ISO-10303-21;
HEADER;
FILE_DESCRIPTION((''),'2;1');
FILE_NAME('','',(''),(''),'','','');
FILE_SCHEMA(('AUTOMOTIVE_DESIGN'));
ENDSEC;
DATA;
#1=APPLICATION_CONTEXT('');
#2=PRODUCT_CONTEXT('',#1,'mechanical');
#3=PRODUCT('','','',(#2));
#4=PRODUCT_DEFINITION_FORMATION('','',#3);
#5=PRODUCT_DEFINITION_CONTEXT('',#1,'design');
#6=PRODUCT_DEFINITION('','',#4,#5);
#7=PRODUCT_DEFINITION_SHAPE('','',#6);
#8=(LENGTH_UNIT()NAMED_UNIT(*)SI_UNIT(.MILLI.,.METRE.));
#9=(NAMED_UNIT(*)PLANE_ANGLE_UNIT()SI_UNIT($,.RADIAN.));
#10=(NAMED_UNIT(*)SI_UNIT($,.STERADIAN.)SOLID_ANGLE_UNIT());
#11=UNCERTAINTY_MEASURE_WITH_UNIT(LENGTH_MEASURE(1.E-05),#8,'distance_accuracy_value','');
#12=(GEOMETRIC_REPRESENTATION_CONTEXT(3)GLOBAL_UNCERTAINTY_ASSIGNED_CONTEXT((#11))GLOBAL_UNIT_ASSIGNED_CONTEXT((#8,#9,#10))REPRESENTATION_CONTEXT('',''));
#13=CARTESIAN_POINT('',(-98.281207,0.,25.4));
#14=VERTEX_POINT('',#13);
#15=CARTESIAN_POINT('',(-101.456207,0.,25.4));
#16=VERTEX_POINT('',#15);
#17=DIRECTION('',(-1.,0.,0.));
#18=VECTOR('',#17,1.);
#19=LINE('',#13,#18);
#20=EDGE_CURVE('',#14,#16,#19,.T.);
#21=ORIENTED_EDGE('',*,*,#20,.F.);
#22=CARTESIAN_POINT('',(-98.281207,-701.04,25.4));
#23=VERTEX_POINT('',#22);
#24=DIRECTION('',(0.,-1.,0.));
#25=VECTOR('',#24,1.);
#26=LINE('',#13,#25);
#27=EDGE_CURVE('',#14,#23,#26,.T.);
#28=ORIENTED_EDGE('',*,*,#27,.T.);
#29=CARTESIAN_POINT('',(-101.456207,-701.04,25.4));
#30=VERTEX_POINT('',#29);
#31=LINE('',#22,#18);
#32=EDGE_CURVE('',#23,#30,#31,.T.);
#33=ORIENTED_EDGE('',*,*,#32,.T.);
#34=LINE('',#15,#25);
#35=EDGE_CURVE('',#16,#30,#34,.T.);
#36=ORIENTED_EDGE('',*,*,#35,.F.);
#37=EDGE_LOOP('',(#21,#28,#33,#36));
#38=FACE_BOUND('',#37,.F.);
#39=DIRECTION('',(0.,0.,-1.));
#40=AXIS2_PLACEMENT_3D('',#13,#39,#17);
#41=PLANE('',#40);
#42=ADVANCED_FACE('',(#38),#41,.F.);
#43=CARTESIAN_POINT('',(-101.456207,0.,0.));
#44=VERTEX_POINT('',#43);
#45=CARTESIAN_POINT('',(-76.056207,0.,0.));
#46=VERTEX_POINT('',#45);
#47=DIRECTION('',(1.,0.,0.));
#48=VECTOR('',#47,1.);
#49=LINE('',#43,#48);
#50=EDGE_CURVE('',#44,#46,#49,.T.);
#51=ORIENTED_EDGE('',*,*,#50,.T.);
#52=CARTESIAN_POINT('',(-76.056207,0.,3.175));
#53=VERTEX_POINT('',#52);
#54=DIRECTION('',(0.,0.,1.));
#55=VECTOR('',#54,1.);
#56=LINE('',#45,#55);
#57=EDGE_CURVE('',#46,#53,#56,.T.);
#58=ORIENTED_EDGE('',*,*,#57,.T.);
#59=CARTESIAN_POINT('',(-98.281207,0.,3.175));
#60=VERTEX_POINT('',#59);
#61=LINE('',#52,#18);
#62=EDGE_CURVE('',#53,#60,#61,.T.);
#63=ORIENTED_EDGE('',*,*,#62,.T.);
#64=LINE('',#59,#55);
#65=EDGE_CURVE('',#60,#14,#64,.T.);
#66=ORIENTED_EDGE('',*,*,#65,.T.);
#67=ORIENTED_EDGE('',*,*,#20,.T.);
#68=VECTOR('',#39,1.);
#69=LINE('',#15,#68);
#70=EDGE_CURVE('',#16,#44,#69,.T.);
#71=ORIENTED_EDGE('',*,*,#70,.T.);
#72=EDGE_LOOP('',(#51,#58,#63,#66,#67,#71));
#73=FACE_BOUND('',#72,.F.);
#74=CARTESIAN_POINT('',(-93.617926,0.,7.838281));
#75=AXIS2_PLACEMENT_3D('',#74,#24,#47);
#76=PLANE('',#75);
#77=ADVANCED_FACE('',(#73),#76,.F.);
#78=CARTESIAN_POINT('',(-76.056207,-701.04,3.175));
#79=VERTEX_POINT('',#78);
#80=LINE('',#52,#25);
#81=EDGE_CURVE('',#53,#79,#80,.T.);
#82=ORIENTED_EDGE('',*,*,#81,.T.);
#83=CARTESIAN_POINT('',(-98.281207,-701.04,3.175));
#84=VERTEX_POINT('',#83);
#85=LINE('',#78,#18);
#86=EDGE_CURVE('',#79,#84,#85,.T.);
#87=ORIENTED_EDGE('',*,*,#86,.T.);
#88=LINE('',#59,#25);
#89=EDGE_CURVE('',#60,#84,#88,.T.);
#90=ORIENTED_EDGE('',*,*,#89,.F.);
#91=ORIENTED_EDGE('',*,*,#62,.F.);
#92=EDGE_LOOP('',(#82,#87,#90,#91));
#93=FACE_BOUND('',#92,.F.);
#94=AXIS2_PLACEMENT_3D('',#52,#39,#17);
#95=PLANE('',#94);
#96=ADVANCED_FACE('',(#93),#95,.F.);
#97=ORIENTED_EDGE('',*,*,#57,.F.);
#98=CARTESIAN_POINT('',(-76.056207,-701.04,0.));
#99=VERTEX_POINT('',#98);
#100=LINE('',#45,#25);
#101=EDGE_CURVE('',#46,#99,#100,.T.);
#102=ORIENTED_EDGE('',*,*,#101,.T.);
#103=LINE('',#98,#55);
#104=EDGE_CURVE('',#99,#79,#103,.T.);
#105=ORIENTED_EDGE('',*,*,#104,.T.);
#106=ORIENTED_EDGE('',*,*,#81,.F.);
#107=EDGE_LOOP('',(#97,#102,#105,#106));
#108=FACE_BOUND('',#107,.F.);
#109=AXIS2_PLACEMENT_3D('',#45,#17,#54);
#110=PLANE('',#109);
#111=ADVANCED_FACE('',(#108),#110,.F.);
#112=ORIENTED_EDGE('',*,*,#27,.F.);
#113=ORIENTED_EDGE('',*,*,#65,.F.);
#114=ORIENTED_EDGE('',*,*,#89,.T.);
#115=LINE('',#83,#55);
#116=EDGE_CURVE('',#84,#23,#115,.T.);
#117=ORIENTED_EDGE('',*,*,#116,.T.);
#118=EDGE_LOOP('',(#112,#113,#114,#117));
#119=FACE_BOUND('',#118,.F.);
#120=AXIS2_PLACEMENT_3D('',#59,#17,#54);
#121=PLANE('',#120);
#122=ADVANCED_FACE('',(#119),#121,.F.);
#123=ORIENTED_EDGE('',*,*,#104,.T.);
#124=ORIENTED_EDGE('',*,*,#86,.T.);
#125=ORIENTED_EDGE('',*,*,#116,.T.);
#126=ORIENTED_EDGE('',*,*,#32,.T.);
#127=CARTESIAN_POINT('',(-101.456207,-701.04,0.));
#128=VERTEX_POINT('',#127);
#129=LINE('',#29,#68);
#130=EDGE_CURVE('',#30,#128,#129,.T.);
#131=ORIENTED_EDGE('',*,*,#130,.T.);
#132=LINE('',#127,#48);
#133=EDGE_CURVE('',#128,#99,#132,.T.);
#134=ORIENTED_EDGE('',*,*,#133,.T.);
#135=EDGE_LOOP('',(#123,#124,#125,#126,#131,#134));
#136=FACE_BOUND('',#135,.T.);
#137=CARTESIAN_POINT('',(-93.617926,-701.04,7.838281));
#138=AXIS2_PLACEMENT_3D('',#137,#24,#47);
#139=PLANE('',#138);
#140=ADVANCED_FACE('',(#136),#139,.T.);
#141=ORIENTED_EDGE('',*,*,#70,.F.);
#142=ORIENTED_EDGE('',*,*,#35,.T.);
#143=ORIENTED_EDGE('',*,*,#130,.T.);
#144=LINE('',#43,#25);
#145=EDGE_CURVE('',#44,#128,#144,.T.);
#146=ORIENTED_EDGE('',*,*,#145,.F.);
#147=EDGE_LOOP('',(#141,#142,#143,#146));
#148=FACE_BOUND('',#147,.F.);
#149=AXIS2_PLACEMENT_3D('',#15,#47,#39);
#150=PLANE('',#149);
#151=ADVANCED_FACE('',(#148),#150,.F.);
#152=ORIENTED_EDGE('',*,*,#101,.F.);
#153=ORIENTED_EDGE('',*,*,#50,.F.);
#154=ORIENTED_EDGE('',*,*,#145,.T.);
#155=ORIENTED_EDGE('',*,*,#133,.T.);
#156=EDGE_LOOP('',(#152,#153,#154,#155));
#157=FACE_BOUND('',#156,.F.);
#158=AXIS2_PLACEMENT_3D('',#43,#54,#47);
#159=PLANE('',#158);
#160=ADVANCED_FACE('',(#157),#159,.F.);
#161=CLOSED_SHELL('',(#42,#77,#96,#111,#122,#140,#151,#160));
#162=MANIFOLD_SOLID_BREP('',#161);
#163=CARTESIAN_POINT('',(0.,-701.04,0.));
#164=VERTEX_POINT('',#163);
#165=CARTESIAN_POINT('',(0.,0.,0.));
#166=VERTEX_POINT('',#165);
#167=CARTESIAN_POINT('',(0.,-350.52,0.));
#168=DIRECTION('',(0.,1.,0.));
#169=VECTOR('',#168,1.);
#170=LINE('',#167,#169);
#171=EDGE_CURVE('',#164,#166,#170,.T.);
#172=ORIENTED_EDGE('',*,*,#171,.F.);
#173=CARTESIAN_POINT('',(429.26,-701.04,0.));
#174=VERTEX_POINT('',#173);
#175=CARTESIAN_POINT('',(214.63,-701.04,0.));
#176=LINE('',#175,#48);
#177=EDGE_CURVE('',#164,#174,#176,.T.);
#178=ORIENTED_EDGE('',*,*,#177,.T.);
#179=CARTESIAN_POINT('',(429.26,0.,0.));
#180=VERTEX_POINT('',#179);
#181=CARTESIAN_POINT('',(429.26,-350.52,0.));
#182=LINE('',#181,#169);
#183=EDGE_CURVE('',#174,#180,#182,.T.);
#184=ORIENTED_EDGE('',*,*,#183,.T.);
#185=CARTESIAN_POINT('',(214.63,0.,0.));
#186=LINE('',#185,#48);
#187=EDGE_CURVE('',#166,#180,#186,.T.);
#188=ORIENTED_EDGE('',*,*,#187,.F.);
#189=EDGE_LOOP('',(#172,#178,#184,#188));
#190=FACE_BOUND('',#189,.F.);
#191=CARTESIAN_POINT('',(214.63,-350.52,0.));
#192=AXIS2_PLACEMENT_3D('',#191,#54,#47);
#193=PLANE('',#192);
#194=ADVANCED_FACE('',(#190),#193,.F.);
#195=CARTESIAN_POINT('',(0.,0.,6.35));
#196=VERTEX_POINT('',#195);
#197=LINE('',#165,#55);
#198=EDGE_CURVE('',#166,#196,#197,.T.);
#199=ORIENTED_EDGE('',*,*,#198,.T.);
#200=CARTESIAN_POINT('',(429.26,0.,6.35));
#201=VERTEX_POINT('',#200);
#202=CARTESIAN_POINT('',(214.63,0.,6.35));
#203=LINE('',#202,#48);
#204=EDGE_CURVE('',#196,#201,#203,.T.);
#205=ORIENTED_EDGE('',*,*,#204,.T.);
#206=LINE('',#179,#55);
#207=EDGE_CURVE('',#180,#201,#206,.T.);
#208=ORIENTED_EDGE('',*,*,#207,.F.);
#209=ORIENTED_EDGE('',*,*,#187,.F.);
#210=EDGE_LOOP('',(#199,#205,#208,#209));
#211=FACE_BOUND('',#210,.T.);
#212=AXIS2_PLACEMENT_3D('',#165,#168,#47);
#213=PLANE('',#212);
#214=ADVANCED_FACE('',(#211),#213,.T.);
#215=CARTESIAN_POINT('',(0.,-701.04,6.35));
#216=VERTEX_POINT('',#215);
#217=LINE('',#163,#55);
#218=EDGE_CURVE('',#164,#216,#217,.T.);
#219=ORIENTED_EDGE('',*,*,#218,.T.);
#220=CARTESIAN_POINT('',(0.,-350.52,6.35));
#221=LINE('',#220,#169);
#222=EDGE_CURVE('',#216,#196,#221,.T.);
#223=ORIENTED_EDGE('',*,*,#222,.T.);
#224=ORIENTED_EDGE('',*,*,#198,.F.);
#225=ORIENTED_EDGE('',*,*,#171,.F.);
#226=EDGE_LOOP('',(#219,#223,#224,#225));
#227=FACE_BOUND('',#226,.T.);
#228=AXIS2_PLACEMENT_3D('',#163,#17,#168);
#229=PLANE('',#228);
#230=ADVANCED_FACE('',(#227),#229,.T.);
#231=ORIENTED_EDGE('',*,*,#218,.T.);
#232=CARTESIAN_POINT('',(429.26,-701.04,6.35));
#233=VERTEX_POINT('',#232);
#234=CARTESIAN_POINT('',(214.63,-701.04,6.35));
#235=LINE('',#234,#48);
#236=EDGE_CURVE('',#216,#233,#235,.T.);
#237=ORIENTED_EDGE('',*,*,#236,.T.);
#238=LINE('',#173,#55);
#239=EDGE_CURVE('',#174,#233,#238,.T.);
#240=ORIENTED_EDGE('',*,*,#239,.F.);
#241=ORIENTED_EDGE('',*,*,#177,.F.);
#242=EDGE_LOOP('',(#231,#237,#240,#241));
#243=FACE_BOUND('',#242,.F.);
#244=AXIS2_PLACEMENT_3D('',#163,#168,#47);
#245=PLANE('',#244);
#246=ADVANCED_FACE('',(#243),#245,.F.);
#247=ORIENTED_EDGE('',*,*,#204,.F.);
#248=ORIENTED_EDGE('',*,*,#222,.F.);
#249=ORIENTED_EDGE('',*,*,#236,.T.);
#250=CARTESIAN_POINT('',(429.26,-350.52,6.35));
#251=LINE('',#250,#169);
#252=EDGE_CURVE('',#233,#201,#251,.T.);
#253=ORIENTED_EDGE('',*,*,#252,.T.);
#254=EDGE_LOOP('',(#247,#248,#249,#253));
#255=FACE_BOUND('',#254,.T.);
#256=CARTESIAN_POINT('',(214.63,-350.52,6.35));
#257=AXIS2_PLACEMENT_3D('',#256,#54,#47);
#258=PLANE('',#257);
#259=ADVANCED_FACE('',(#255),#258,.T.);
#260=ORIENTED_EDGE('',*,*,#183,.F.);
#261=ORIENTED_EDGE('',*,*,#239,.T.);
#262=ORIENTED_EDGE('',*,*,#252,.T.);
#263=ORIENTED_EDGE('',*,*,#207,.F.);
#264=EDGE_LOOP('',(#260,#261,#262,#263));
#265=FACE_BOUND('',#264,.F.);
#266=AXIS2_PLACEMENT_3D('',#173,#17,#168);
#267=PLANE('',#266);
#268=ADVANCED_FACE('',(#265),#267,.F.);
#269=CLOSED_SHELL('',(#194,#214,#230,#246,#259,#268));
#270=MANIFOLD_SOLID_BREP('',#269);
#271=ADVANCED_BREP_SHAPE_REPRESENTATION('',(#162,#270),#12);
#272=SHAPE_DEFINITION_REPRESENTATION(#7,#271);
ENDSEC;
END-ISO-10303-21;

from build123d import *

# Parameters (mm, degrees)
F0_W     = 429.26
F0_H     = 701.04
F1_DEPTH = 6.35
F3_DEPTH = 701.04


# Not quite as in the source:
# - the program builds the solid bodies; features that only make, move or delete a surface that nothing else refers to are left out


with BuildPart() as f1:
    # F0 (on Top) → F1 (new body)
    with BuildSketch(Plane.XY):
        with Locations((214.63, -350.52)):
            Rectangle(F0_W, F0_H)
    extrude(amount=F1_DEPTH)


with BuildPart() as f3:
    # F2 (on Front) → F3 (new body)
    with BuildSketch(Plane.XZ):
        Polygon((-101.4562074584, 25.4), (-101.4562074584, 0), (-76.0562074584, 0), (-76.0562074584, 3.175), (-98.2812074584, 3.175), (-98.2812074584, 25.4), align=None)
    extrude(amount=F3_DEPTH)


solid = Compound([f1.part, f3.part])
